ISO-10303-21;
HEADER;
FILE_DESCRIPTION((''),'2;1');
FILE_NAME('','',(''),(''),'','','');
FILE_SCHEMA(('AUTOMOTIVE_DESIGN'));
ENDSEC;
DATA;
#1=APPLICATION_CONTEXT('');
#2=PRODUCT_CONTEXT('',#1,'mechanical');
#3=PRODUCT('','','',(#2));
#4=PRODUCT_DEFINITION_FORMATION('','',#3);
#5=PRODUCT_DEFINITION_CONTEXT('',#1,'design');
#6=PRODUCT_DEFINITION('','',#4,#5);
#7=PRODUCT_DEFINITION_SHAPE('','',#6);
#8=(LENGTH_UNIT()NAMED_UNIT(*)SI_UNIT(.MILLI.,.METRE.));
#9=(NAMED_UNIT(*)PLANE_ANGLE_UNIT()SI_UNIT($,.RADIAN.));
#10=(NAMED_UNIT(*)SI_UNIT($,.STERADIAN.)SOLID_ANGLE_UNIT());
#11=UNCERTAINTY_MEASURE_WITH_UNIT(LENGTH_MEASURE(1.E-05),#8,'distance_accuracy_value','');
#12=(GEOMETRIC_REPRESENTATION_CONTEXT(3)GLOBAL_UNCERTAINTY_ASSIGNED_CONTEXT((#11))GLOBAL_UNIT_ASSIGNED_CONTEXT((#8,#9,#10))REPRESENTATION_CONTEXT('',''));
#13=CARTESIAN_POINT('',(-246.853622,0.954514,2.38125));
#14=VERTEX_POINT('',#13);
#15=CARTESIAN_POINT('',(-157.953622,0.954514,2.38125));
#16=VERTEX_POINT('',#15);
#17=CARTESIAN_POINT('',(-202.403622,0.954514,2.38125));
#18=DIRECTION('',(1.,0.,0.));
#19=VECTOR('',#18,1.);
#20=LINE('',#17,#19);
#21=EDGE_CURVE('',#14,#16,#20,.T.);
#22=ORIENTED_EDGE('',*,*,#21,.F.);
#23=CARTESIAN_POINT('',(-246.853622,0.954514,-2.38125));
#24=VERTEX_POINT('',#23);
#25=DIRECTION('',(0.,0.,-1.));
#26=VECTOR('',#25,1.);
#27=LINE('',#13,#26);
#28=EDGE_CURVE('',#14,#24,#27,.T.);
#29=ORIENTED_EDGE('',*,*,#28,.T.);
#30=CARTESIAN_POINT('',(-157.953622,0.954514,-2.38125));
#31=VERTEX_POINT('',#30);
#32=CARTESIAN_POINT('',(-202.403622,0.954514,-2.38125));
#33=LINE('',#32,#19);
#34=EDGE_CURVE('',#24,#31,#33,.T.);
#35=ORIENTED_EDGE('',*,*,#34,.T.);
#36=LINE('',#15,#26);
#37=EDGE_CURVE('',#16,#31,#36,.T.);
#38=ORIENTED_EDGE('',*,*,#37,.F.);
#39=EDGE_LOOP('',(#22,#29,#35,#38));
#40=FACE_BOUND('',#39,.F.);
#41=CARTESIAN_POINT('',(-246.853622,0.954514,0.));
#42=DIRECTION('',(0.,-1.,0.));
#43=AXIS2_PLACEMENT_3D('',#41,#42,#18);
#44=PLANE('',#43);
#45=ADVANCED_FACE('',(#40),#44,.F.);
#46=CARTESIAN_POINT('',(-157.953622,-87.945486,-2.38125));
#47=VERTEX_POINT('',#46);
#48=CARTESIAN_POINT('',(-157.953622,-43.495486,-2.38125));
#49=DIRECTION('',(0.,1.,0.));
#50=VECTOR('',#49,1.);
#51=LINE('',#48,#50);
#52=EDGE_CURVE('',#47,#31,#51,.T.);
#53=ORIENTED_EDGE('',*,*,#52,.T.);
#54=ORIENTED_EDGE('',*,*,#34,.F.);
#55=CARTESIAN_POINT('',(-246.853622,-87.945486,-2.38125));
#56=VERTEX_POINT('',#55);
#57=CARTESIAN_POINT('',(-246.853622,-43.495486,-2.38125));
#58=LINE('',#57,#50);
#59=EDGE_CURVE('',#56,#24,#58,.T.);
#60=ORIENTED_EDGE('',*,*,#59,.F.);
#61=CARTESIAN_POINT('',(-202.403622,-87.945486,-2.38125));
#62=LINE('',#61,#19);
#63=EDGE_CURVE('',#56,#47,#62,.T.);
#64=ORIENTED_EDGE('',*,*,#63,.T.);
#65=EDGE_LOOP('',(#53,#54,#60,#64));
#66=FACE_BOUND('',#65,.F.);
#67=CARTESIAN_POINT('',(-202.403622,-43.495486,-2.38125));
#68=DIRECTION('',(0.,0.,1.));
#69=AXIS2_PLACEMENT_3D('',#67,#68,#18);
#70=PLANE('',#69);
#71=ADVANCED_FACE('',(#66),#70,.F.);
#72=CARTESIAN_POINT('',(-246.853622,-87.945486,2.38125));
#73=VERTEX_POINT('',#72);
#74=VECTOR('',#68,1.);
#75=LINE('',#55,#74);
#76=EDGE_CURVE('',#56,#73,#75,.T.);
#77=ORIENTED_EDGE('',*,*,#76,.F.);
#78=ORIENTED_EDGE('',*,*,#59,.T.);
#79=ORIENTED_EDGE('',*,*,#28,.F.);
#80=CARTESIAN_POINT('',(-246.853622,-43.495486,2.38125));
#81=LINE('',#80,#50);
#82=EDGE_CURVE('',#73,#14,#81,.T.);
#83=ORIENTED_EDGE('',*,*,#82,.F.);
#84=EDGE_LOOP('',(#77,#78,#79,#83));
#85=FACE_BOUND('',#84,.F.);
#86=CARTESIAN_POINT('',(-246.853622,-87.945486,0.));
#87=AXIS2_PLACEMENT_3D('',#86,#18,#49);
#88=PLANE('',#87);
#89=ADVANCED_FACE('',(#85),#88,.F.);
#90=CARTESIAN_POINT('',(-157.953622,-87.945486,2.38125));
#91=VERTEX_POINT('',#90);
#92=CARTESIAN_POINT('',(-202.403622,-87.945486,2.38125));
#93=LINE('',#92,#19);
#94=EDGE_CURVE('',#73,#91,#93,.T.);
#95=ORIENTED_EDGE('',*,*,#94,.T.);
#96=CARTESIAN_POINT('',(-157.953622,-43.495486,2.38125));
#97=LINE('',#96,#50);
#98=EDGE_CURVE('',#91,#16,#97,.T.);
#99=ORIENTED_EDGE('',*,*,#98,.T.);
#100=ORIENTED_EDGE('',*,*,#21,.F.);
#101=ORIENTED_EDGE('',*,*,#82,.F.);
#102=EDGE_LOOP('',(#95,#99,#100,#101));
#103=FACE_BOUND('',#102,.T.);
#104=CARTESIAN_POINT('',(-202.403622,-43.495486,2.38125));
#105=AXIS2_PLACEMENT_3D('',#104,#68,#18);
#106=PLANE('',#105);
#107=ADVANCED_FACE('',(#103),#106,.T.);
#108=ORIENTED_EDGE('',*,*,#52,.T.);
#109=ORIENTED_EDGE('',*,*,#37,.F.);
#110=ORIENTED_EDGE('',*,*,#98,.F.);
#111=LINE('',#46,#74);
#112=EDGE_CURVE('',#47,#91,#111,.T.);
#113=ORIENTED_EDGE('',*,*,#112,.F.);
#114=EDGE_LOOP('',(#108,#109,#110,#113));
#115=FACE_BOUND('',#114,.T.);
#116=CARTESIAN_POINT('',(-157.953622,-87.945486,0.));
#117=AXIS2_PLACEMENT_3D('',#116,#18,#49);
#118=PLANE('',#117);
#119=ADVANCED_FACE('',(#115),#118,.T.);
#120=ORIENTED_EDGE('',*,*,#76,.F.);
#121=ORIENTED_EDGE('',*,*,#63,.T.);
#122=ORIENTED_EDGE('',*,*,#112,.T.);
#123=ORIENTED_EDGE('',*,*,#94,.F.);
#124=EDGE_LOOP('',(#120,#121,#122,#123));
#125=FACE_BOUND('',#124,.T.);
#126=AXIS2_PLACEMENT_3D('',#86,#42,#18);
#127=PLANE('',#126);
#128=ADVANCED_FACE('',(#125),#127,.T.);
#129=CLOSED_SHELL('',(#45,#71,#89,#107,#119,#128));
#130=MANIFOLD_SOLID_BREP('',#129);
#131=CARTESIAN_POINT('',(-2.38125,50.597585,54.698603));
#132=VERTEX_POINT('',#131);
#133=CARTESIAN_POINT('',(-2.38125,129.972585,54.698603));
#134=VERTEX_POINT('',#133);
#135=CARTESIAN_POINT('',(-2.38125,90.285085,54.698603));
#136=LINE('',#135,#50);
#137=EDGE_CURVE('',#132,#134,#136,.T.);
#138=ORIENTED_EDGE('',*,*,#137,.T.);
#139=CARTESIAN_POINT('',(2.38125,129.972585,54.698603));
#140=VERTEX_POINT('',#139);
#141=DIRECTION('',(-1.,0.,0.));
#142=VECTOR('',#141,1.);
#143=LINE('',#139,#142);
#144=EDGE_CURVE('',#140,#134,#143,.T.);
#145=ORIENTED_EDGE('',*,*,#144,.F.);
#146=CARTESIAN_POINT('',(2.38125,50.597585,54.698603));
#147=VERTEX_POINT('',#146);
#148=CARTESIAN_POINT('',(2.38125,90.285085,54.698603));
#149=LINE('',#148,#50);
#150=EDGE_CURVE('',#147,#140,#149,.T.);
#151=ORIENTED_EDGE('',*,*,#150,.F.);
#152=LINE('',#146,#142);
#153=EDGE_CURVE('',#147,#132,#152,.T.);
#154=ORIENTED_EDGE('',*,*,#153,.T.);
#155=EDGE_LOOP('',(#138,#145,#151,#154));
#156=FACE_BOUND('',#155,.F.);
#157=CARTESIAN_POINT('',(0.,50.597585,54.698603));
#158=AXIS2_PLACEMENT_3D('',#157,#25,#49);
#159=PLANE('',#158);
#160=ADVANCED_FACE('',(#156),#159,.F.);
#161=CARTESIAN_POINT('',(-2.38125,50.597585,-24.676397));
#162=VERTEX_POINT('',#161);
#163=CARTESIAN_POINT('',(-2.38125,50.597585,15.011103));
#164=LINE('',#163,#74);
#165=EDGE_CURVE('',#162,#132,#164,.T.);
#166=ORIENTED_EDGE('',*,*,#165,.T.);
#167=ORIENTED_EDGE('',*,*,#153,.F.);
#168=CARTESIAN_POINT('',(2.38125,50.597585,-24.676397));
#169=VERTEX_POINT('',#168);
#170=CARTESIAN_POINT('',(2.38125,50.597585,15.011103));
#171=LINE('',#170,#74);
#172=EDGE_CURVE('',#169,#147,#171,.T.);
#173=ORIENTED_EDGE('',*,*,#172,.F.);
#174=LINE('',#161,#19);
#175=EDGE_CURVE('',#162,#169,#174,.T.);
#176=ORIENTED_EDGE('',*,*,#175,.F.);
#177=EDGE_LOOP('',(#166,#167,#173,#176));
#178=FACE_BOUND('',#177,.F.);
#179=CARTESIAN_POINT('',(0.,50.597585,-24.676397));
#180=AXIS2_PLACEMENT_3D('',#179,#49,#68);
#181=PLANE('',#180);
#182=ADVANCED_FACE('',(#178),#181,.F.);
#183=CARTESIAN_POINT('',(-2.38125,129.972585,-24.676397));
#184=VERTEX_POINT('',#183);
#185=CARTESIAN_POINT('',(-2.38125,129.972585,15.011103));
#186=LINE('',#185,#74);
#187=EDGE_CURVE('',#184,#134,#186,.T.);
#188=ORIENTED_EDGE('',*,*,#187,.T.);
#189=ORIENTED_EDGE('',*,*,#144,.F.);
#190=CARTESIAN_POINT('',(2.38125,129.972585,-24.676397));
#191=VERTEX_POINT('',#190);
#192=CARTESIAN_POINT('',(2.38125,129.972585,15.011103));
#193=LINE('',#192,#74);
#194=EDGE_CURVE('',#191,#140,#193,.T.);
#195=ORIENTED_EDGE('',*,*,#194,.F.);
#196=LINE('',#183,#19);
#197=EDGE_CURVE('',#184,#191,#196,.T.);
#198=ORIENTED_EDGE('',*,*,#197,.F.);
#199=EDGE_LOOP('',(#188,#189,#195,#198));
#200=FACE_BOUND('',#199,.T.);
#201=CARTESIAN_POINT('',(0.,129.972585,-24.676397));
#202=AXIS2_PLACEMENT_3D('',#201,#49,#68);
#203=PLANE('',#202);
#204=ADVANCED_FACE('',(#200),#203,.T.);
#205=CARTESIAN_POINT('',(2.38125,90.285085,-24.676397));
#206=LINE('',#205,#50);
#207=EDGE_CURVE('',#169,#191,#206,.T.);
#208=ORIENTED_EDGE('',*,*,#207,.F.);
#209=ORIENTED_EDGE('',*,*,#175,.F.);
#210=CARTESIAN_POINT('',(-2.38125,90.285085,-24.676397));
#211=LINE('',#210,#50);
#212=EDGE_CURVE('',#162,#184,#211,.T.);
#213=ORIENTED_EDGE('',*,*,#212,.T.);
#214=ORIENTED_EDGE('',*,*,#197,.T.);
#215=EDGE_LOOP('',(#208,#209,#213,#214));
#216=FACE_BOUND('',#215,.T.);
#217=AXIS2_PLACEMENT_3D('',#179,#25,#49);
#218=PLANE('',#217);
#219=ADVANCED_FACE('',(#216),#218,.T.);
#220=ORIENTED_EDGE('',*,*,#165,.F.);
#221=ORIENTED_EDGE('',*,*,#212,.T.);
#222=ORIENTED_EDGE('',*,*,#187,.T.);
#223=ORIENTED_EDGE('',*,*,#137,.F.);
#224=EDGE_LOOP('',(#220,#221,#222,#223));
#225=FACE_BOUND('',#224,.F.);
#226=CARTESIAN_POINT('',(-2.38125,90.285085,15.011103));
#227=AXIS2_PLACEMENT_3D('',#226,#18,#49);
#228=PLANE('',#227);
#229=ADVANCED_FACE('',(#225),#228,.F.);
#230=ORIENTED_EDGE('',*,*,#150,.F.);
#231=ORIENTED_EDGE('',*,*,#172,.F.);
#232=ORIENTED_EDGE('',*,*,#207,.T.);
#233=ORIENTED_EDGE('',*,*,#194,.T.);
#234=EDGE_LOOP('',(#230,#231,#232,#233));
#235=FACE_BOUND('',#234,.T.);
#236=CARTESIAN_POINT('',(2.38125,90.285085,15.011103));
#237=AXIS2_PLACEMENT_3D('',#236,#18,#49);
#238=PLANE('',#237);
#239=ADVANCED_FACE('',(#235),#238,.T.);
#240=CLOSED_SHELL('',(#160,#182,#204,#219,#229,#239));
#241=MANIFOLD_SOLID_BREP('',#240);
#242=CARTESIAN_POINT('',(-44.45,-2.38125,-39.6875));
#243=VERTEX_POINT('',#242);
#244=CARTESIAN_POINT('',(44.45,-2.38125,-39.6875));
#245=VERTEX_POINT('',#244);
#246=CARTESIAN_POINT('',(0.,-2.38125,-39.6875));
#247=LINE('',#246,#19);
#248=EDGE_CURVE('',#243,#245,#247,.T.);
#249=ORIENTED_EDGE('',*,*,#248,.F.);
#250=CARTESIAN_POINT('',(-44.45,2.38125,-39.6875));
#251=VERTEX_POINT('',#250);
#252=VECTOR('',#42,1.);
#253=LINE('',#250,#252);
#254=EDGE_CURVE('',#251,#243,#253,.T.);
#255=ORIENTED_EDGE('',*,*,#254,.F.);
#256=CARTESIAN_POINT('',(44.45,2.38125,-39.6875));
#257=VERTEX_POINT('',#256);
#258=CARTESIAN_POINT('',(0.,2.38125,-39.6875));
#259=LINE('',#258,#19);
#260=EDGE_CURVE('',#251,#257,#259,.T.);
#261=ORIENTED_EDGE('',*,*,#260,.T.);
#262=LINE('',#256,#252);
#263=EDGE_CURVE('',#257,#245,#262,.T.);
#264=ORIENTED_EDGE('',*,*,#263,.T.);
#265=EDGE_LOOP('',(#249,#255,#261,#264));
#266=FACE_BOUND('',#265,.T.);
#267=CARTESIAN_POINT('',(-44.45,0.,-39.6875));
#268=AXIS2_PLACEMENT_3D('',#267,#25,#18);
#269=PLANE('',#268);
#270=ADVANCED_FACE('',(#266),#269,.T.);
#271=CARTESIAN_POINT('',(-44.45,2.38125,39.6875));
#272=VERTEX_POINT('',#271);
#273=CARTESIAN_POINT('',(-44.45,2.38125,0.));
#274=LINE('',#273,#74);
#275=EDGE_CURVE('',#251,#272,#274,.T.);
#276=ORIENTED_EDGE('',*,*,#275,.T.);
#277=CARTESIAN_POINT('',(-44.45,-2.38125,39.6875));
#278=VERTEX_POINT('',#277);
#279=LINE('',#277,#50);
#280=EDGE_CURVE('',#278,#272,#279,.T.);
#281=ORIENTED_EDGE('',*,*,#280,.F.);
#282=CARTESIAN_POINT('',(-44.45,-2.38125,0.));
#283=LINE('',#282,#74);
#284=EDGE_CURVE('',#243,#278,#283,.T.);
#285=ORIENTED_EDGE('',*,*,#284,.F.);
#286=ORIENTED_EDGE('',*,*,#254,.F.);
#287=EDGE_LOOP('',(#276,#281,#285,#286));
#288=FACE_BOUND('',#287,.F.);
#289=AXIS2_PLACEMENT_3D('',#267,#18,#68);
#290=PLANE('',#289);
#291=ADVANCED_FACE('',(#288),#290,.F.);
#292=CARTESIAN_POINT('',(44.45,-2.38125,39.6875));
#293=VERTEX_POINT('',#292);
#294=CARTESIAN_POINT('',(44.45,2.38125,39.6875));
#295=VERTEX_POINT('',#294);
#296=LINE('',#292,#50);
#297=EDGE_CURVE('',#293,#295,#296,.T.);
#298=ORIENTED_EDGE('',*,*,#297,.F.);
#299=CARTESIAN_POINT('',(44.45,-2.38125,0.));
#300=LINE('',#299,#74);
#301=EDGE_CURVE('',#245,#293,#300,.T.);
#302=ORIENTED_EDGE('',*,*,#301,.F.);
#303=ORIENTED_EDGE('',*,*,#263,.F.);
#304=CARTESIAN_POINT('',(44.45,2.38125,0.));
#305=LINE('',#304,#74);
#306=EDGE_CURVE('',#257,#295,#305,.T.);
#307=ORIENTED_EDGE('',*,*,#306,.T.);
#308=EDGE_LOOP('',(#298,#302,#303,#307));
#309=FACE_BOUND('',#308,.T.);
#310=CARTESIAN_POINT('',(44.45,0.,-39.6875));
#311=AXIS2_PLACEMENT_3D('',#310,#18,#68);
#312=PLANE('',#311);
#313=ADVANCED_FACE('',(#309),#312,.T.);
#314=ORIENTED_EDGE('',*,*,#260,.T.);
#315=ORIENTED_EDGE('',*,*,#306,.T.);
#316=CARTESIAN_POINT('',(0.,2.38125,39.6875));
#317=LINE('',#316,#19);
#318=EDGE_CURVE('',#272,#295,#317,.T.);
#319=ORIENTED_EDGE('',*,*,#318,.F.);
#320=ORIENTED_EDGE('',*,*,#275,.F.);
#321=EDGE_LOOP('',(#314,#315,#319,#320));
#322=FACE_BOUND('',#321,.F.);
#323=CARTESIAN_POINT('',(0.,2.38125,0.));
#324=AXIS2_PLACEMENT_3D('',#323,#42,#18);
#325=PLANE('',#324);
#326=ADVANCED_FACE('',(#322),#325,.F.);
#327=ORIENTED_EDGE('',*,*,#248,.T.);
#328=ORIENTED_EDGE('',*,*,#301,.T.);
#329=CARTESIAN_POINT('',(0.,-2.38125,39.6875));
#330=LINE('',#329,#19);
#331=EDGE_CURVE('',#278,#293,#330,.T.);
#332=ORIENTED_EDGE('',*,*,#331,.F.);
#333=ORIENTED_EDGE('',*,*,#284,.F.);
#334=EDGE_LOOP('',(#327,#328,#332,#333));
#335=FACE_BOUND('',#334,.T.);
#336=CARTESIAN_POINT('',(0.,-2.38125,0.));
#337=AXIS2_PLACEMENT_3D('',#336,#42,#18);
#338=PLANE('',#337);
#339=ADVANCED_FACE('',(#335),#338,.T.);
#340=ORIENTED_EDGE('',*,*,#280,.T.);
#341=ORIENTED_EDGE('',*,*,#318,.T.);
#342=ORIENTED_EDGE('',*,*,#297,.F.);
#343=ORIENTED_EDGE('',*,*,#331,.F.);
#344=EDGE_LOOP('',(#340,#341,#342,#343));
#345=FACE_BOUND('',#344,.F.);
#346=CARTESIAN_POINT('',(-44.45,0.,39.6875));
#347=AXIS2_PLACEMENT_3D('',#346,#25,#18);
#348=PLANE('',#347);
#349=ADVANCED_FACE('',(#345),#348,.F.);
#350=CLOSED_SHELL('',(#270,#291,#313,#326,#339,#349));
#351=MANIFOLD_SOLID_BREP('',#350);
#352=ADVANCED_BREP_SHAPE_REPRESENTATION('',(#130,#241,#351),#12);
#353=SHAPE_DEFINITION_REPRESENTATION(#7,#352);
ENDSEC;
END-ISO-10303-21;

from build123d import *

# Parameters (mm, degrees)
F1_W     = 88.9
F1_H     = 79.375
F2_DEPTH = 2.38125
F3_W     = 79.375
F3_H     = 79.375
F4_DEPTH = 2.38125
F5_W     = 88.9
F5_H     = 88.9
F6_DEPTH = 2.38125


# Not quite as in the source:
# - a variable given as a bare number and used for a length is read in inches; the dataset says mm whatever the document's units were


with BuildPart() as f2:
    # F1 (on Front) → F2 (new body, symmetric)
    with BuildSketch(Plane.XZ):
        Rectangle(F1_W, F1_H)
    extrude(amount=F2_DEPTH, both=True)


with BuildPart() as f4:
    # F3 (on Right) → F4 (new body, symmetric)
    with BuildSketch(Plane.YZ):
        with Locations((90.2850845814, 15.0111026208)):
            Rectangle(F3_W, F3_H)
    extrude(amount=F4_DEPTH, both=True)


with BuildPart() as f6:
    # F5 (on Top) → F6 (new body, symmetric)
    with BuildSketch(Plane.XY):
        with Locations((-202.4036215127, -43.4954859122)):
            Rectangle(F5_W, F5_H)
    extrude(amount=F6_DEPTH, both=True)


solid = Compound([f2.part, f4.part, f6.part])
